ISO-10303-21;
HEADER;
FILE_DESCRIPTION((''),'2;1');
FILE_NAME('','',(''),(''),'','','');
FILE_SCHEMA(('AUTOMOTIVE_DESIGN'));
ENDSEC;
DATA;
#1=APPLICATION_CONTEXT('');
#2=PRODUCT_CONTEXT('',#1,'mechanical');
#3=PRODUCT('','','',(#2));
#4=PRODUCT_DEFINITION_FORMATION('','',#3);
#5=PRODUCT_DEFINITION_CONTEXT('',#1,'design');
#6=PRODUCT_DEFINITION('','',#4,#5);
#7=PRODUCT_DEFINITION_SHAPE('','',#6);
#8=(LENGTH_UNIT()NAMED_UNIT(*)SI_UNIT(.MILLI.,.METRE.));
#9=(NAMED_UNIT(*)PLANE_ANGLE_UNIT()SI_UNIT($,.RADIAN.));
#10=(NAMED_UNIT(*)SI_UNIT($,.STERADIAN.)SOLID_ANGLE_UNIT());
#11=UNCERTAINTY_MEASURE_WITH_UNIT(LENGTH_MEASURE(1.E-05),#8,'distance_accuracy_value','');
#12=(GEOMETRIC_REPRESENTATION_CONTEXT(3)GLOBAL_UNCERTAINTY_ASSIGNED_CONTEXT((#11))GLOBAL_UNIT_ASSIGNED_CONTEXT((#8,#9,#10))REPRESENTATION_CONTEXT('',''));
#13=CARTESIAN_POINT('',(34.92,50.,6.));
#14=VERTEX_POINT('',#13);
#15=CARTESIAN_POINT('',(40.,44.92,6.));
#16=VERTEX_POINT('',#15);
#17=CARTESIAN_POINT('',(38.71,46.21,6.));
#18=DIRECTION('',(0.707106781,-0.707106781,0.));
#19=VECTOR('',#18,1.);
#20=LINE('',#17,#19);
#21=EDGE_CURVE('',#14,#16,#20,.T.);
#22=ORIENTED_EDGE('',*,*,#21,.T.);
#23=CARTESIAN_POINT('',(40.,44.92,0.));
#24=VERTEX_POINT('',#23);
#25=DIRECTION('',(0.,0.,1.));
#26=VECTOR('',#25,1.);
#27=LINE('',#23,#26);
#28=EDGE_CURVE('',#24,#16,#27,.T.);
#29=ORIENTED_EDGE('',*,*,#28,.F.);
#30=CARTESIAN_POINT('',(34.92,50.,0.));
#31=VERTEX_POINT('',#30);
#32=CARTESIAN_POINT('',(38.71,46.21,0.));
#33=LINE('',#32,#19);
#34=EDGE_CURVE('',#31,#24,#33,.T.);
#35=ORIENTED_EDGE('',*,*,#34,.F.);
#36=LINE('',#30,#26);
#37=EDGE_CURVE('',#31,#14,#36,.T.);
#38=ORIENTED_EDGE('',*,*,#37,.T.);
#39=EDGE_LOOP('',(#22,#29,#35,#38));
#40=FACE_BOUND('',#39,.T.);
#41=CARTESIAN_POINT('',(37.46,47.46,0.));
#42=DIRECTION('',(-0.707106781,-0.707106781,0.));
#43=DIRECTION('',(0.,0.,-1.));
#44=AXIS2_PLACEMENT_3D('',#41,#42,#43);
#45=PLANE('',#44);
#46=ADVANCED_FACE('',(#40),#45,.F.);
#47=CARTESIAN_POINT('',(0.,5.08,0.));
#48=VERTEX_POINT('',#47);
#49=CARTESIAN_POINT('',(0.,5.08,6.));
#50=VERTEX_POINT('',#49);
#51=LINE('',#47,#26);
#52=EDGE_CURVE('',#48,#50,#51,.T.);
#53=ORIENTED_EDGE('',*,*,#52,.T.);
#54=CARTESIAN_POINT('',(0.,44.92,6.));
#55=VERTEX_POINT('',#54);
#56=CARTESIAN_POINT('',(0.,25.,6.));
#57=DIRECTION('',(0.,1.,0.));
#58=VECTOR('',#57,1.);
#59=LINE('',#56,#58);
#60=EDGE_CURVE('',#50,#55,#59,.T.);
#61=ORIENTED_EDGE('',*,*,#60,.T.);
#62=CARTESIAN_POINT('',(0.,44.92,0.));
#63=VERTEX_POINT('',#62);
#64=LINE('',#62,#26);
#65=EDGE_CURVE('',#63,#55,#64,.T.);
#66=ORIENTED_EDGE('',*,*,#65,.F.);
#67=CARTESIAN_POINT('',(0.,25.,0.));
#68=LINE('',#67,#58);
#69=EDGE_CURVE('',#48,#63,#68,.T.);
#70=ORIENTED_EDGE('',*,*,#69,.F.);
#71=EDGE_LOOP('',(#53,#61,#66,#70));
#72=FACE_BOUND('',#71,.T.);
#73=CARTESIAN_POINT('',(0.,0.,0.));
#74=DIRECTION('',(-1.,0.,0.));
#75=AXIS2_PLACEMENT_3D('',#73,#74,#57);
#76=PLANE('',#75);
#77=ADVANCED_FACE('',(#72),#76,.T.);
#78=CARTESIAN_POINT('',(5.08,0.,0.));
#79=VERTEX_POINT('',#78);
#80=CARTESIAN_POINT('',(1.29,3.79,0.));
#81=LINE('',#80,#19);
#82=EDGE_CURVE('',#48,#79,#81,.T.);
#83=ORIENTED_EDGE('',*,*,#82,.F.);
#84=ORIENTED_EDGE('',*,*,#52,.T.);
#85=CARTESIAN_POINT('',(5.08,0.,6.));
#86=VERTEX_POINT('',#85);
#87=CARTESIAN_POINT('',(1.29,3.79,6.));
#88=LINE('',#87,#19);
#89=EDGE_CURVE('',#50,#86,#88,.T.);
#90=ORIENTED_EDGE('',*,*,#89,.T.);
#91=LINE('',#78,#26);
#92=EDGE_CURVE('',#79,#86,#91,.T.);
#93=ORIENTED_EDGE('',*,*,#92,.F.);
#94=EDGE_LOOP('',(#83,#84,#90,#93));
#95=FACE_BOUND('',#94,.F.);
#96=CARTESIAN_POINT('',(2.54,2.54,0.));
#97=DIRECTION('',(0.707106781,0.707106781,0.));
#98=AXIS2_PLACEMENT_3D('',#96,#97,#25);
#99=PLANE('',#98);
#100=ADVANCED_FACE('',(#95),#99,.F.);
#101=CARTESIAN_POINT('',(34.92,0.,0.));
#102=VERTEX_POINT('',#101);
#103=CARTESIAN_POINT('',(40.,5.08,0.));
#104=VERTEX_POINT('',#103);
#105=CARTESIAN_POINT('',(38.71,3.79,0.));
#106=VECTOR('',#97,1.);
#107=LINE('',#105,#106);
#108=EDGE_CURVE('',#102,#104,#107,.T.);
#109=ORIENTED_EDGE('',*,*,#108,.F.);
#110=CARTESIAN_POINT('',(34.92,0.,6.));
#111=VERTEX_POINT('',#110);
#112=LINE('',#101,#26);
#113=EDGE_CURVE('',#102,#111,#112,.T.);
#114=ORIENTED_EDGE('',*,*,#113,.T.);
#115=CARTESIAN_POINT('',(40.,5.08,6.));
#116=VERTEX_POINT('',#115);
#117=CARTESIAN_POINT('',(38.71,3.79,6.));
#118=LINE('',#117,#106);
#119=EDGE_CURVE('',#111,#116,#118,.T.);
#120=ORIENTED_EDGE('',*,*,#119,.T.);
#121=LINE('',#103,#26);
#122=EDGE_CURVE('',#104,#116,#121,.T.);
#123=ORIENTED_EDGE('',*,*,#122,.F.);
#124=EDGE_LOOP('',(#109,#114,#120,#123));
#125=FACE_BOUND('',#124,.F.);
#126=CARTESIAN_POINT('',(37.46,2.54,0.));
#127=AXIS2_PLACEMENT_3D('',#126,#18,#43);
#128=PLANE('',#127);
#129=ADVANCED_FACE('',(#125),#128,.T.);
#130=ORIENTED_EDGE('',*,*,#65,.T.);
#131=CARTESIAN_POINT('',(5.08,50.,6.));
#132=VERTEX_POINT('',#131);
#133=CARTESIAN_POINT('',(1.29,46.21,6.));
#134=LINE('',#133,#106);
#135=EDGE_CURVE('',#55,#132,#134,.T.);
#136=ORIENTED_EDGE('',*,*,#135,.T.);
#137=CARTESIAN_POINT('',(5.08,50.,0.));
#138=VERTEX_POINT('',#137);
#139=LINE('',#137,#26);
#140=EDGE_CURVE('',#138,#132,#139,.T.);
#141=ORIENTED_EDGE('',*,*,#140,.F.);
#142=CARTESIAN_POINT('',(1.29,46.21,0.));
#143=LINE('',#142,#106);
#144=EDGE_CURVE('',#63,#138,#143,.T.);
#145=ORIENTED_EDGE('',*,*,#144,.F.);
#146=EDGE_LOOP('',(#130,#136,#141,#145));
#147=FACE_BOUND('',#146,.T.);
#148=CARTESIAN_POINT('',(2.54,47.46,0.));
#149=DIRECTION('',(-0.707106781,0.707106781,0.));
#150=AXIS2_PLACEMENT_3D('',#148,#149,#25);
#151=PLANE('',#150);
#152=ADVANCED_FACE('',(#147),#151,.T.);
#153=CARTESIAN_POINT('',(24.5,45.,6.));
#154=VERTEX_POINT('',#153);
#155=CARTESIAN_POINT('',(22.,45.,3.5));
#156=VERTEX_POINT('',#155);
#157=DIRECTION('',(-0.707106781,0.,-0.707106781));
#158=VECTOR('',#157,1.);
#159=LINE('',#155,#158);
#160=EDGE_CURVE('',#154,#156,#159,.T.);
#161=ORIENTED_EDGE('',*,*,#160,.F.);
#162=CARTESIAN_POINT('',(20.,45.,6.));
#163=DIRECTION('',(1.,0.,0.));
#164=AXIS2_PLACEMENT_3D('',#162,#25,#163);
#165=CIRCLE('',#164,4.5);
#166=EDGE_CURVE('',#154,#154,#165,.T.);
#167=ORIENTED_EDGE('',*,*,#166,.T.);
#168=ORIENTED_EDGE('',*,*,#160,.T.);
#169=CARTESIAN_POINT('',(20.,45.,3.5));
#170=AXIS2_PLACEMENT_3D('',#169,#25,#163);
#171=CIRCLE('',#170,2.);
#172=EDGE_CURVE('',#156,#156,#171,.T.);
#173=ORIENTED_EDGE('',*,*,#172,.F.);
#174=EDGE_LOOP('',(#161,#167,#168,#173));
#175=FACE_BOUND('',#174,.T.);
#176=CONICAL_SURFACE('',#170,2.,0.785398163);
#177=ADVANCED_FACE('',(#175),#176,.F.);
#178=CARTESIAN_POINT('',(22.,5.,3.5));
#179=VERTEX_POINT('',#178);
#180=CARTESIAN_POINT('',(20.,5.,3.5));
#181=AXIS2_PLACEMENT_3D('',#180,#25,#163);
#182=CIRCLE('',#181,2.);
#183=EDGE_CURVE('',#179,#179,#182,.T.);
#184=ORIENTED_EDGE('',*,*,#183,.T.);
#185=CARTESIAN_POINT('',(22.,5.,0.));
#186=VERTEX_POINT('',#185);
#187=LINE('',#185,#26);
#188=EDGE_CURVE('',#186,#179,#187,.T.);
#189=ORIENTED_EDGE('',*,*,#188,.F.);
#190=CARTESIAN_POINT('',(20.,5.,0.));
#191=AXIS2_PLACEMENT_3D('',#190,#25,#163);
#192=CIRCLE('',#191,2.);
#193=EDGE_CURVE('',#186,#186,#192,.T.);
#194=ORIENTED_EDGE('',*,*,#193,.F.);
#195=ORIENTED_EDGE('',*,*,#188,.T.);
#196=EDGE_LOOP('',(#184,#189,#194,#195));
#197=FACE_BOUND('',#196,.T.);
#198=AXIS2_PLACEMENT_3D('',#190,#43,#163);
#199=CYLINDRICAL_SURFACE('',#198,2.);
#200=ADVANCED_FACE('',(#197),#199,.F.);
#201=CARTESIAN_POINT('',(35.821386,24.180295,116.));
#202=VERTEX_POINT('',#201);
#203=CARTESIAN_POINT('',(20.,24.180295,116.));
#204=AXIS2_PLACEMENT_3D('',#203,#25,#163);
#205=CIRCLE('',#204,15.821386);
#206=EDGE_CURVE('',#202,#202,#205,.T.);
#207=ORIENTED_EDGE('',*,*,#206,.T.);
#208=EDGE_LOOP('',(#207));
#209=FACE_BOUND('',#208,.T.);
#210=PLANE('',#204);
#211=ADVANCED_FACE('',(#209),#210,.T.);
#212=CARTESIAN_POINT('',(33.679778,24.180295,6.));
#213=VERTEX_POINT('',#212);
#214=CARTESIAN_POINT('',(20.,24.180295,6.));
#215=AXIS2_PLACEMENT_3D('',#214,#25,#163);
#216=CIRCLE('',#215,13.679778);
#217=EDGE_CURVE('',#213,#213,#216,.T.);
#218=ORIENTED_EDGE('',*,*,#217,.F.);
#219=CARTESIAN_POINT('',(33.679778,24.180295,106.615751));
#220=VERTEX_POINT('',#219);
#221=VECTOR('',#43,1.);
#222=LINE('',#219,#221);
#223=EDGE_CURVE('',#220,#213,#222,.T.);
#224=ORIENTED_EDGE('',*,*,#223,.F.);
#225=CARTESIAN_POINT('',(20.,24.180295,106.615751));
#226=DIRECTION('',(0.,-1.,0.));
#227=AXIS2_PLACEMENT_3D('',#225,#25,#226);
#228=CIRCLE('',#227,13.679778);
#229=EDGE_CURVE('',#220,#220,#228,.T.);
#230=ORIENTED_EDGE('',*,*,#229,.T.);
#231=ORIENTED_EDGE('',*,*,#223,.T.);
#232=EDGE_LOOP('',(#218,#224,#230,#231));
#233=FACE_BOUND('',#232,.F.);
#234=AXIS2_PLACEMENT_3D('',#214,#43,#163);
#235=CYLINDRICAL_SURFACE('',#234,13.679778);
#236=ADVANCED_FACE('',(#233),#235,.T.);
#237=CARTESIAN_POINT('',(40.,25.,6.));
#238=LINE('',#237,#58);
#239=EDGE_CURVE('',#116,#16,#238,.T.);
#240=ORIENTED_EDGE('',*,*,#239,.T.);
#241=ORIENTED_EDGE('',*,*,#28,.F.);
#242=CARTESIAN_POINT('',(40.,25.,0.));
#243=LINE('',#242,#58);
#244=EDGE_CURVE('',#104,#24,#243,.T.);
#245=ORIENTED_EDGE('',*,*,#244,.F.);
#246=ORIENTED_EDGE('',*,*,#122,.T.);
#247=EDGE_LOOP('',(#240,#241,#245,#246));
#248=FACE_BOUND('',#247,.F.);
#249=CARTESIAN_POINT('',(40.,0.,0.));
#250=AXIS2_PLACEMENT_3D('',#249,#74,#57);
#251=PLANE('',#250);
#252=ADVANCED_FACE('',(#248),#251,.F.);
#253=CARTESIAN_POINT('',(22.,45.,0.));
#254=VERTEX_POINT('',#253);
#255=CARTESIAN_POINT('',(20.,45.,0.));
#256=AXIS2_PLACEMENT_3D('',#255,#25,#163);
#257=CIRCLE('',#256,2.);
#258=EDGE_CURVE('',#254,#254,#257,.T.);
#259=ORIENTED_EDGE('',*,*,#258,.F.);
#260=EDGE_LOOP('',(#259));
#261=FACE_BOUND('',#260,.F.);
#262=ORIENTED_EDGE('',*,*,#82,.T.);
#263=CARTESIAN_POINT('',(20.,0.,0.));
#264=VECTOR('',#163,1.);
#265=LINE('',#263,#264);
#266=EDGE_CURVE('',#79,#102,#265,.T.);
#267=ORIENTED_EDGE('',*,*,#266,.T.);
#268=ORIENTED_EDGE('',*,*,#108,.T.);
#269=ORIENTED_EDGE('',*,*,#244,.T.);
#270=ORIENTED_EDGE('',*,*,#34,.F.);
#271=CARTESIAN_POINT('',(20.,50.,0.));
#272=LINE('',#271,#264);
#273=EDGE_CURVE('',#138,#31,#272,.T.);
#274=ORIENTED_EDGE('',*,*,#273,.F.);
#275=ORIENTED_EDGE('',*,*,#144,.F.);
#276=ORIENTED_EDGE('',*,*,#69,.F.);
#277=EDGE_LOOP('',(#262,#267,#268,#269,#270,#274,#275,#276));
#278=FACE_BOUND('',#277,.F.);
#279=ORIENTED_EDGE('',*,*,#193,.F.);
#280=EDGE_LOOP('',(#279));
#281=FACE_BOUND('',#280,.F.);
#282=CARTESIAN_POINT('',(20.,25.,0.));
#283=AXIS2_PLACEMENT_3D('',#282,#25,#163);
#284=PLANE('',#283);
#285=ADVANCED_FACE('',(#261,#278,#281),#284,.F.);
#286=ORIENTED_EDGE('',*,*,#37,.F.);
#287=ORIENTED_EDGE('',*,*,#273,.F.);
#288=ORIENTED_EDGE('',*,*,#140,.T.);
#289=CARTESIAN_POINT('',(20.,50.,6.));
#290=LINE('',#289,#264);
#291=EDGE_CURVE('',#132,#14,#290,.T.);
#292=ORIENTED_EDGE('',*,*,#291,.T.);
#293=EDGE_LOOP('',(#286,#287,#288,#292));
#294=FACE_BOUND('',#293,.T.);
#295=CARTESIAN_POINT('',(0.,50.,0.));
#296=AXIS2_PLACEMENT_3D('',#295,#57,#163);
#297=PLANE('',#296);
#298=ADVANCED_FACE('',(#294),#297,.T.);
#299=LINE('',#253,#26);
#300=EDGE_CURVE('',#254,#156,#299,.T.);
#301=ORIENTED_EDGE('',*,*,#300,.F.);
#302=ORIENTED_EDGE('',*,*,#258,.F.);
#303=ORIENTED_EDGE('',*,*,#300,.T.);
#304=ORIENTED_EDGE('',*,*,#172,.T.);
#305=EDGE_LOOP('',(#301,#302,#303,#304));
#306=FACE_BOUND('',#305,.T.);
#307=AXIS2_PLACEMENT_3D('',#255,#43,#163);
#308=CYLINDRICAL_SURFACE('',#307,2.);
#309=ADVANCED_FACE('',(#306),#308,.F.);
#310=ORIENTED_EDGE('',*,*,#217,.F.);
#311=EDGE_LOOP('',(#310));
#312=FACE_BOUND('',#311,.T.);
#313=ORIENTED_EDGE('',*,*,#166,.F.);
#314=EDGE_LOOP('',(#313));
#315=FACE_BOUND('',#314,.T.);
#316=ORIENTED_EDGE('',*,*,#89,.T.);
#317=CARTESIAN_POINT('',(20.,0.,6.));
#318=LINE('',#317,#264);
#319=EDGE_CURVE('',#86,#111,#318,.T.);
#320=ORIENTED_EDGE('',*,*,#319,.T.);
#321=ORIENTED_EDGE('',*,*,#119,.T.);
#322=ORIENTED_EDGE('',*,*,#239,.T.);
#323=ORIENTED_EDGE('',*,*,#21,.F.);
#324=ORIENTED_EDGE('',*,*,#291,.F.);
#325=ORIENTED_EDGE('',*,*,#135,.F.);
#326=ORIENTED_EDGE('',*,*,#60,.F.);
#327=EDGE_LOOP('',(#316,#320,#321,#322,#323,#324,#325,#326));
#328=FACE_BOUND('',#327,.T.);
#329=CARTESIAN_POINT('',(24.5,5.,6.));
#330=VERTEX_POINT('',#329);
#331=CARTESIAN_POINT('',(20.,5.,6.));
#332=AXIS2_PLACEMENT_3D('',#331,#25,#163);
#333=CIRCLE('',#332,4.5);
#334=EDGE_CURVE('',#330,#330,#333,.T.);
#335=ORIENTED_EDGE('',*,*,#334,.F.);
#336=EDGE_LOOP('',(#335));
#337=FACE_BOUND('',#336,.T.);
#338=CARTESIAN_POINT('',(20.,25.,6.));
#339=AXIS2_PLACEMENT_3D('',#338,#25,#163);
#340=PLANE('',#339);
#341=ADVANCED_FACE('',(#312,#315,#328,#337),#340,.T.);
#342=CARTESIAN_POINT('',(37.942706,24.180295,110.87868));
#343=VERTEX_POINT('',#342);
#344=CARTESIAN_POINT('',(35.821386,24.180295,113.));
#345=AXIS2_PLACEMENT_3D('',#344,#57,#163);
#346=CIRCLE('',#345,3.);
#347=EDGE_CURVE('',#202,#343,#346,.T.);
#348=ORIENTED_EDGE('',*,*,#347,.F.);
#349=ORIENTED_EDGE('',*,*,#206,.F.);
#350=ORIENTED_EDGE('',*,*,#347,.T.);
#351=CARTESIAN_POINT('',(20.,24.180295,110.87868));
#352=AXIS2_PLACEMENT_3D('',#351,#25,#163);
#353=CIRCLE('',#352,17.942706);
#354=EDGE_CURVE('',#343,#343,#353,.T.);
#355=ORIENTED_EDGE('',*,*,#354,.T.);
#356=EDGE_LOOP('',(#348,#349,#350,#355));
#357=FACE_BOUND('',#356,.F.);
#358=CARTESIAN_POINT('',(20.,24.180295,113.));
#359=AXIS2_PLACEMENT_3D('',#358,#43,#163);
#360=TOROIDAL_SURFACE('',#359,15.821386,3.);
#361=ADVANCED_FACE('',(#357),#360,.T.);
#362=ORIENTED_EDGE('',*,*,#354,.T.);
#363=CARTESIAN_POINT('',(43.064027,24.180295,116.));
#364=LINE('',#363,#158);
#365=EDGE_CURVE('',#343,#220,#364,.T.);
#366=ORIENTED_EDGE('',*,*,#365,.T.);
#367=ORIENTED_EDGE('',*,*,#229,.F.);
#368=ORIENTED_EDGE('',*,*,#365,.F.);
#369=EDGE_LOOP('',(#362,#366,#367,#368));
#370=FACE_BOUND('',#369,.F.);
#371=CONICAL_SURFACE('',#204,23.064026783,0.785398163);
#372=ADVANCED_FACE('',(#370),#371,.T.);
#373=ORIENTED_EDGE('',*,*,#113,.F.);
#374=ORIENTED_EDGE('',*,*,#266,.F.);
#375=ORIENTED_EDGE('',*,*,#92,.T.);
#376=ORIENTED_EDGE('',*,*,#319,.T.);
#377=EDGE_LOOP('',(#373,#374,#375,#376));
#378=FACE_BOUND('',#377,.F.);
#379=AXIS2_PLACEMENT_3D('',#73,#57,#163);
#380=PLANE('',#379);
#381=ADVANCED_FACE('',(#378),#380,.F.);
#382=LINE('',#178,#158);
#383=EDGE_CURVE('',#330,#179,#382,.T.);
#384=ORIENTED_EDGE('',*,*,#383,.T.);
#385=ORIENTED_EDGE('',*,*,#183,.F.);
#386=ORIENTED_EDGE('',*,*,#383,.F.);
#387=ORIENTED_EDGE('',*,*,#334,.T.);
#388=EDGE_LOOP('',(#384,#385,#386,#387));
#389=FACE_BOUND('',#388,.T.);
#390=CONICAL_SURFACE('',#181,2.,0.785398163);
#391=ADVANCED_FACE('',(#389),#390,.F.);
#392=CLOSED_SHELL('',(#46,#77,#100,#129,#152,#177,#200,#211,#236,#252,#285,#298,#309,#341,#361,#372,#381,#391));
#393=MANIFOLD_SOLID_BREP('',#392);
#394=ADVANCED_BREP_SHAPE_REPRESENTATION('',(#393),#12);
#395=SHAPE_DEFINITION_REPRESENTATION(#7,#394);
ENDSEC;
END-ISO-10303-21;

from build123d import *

# Parameters (mm, degrees)
F0_W        = 40
F0_H        = 50
F0_R        = 2
F1_DEPTH    = 6
F2_R        = 13.6797776514
F3_DEPTH    = 100
F4_R        = 23.0640267833
F5_DEPTH    = 10
F6_S5_R     = 13.6797776514
F6_T6_DEPTH = 34
F7_R        = 3
F8_SIZE     = 5.08
F9_SIZE     = 2.5


# Not quite as in the source:
# - a fillet or chamfer that OpenCascade refuses, or shapes differently, is made with other operations: its cross-section is extruded or revolved along the edge and cut away or added


with BuildPart() as f1:
    # F0 (on Top) → F1 (new body)
    with BuildSketch(Plane.XY):
        with Locations((20, 25)):
            Rectangle(F0_W, F0_H)
        with Locations((20, 5)):
            Circle(F0_R, mode=Mode.SUBTRACT)
        with Locations((20, 45)):
            Circle(F0_R, mode=Mode.SUBTRACT)
    extrude(amount=F1_DEPTH)

    # F2 (on face) → F3 (join)
    with BuildSketch(Plane.XY.offset(6)):
        with Locations((20, 24.1802949458)):
            Circle(F2_R)
    extrude(amount=F3_DEPTH)

    # F4 (on face) → F5 (join)
    with BuildSketch(Plane.XY.offset(106)):
        with Locations((20, 24.1802949458)):
            Circle(F4_R)
    extrude(amount=F5_DEPTH)

    # F6: chamfer of 10 on 1 edges, made by hand


with BuildPart() as f6_tool2:
    # F6_s3 → F6_t4 (revolve)
    with BuildSketch(Plane.XZ.offset(-24.1802949458)):
        Polygon((43.0640267833, 116), (33.0640267833, 106), (43.0640267833, 106), align=None)
    revolve(axis=Axis((20, 24.1802949458, 106), (0, 0, 1)))

    # F6_s5 → F6_t6 (cut, symmetric)
    with BuildSketch(Plane.XY.offset(111)):
        with Locations((20, 24.1802949458)):
            Circle(F6_S5_R)
    extrude(amount=F6_T6_DEPTH, both=True, mode=Mode.SUBTRACT)


with BuildPart() as f1_1:
    add(f1.part)

    # F6_t1: cut F6_tool2
    add(f6_tool2.part, mode=Mode.SUBTRACT)

    # F7
    f7_edges = [f1_1.edges().sort_by_distance(p)[0] for p in [
        (-3.064027, 24.180295, 116),
    ]]
    fillet(f7_edges, radius=F7_R)

    # F8
    f8_edges = [f1_1.edges().sort_by_distance(p)[0] for p in [
        (40, 0, 3),
        (40, 50, 3),
        (0, 50, 3),
        (0, 0, 3),
    ]]
    chamfer(f8_edges, length=F8_SIZE)

    # F9
    f9_edges = [f1_1.edges().sort_by_distance(p)[0] for p in [
        (18, 5, 6),
        (18, 45, 6),
    ]]
    chamfer(f9_edges, length=F9_SIZE)


solid = f1_1.part
